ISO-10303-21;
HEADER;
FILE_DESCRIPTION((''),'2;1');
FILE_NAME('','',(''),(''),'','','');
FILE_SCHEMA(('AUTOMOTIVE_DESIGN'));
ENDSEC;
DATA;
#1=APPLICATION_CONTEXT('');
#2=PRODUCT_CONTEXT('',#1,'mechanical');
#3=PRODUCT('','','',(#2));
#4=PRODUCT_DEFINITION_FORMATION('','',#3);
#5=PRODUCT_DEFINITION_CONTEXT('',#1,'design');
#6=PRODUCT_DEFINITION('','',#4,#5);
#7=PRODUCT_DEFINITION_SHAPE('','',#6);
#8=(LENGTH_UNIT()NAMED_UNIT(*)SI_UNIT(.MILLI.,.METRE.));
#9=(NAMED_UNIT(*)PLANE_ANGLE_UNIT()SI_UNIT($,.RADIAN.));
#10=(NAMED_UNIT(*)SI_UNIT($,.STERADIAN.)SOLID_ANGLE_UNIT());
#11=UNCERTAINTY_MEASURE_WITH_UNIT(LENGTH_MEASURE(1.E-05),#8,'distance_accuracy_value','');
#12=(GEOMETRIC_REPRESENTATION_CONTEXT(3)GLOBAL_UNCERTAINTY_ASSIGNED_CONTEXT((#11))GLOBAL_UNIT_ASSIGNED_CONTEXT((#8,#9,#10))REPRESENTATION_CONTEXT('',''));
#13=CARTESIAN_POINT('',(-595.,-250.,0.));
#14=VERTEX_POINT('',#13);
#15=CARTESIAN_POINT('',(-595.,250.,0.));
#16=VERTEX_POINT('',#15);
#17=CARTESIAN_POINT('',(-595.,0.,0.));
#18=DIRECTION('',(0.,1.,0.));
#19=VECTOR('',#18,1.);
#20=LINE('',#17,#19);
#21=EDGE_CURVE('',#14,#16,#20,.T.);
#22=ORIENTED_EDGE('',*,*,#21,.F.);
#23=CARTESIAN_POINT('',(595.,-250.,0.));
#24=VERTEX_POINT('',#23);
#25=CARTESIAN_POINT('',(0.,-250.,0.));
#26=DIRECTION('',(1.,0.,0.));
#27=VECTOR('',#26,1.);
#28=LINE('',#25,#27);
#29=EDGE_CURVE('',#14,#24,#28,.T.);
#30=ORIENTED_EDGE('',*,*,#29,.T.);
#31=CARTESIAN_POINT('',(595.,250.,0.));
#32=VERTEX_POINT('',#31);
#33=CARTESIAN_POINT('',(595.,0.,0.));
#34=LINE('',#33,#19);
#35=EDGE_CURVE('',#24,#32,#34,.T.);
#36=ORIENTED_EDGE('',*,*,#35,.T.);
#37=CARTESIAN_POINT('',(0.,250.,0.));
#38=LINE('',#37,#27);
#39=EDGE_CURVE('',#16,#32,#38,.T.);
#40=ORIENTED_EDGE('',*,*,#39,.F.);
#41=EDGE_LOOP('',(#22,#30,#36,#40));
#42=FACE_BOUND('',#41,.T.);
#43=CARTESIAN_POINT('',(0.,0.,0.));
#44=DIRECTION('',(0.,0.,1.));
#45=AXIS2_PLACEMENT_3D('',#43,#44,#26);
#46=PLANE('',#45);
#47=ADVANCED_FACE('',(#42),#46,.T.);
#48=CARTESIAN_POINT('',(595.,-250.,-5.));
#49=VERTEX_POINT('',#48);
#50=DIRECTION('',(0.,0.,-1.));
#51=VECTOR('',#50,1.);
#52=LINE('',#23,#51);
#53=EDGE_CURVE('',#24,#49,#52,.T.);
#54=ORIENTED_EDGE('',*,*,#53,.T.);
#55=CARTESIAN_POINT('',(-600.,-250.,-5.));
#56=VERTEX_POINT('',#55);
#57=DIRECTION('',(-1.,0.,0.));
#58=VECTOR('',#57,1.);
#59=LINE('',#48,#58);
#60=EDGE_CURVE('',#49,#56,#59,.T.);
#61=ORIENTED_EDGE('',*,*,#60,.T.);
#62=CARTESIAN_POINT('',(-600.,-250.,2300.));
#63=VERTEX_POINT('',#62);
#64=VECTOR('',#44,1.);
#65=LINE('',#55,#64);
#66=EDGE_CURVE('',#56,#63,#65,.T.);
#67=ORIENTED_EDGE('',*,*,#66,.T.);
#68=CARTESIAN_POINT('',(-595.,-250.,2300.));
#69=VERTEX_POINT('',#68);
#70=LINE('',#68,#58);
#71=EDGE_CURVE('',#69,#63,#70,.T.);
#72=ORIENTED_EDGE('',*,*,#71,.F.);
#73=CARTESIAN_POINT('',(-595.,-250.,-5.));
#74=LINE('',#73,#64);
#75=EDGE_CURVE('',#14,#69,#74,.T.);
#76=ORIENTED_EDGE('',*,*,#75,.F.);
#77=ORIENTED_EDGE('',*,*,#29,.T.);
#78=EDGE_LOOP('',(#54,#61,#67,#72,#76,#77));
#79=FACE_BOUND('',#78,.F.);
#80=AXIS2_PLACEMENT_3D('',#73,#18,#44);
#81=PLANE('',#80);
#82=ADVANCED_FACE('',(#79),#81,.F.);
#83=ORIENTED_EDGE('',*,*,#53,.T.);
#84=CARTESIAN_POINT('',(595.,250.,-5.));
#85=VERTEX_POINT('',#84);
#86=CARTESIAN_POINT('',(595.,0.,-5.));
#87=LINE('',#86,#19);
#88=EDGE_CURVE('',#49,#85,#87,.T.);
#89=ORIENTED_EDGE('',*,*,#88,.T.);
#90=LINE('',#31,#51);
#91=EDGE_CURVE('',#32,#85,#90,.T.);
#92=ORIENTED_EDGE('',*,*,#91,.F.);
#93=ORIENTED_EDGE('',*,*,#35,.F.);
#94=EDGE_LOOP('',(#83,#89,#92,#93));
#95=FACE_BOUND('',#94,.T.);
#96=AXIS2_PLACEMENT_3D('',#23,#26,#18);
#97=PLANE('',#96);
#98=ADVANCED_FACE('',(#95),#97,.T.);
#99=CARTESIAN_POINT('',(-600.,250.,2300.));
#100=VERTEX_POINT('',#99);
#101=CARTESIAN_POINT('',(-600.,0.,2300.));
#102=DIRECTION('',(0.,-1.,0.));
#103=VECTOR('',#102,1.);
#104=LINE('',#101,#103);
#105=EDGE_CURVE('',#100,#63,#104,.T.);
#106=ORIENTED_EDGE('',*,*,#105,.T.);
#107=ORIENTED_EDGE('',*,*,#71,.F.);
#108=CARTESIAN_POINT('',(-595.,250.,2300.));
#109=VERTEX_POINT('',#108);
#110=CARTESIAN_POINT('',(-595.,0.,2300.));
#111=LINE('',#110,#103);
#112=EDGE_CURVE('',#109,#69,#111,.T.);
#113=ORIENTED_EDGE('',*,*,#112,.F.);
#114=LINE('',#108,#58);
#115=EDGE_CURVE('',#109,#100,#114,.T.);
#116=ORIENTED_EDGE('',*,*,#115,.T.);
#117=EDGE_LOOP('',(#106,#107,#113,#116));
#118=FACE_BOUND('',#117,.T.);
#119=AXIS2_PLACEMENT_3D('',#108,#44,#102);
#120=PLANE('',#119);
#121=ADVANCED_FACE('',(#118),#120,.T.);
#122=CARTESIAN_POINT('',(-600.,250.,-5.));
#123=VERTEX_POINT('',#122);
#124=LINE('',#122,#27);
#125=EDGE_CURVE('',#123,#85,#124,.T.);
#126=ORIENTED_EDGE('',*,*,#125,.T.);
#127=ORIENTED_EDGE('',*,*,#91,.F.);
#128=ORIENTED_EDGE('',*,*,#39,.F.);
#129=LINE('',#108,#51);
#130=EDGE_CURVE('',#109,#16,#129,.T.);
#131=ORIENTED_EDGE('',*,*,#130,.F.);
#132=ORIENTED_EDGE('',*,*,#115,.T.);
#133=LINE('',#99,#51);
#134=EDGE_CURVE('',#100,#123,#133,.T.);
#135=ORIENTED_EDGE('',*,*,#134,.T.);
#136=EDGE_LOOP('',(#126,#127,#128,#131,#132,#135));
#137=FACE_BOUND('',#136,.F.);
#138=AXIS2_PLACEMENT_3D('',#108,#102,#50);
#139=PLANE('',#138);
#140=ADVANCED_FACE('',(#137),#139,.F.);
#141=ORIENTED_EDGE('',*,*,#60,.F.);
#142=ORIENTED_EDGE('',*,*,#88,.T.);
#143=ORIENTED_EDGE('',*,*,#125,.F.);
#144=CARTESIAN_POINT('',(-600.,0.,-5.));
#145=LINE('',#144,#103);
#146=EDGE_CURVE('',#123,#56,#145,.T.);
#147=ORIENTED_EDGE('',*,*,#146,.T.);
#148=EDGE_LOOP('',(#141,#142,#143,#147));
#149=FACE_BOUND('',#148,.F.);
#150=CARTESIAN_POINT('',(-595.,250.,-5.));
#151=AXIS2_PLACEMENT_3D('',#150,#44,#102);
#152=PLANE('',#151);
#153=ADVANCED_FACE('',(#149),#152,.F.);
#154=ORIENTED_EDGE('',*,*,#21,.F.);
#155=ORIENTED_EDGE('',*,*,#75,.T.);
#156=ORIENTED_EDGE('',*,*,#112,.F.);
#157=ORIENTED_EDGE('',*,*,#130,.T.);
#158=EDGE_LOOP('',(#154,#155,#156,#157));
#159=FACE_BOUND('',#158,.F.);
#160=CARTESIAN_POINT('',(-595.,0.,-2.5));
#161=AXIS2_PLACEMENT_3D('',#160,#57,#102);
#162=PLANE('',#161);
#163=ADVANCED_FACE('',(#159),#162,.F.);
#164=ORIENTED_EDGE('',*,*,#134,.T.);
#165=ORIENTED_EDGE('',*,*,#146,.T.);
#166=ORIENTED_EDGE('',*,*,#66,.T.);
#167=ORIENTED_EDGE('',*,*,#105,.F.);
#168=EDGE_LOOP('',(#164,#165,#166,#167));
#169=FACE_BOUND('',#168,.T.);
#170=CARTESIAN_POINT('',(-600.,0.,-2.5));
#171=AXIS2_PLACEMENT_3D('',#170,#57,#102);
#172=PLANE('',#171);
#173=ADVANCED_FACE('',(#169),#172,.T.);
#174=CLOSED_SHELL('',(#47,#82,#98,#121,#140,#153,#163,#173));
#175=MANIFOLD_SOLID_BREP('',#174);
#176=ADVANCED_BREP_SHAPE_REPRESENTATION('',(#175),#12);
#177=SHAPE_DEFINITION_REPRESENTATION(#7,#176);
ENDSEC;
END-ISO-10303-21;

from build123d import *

# Parameters (mm, degrees)
F0_W     = 1190
F0_H     = 500
F1_DEPTH = 5
F2_W     = 500
F2_H     = 5
F2_H_2   = 2300
F3_DEPTH = 5


# Not quite as in the source:
# - the program builds the solid bodies; features that only make, move or delete a surface that nothing else refers to are left out


with BuildPart() as f1:
    # F0 (on Top) → F1 (new body)
    with BuildSketch(Plane.XY):
        Rectangle(F0_W, F0_H)
    extrude(amount=-F1_DEPTH)

    # F2 (on face) → F3 (join)
    with BuildSketch(Plane(origin=(-595, 0, 0), x_dir=(0, -1, 0), z_dir=(-1, 0, 0))):
        with Locations((0, -2.5)):
            Rectangle(F2_W, F2_H)
        with Locations((0, 1150)):
            Rectangle(F2_W, F2_H_2)
    extrude(amount=F3_DEPTH)


solid = f1.part
